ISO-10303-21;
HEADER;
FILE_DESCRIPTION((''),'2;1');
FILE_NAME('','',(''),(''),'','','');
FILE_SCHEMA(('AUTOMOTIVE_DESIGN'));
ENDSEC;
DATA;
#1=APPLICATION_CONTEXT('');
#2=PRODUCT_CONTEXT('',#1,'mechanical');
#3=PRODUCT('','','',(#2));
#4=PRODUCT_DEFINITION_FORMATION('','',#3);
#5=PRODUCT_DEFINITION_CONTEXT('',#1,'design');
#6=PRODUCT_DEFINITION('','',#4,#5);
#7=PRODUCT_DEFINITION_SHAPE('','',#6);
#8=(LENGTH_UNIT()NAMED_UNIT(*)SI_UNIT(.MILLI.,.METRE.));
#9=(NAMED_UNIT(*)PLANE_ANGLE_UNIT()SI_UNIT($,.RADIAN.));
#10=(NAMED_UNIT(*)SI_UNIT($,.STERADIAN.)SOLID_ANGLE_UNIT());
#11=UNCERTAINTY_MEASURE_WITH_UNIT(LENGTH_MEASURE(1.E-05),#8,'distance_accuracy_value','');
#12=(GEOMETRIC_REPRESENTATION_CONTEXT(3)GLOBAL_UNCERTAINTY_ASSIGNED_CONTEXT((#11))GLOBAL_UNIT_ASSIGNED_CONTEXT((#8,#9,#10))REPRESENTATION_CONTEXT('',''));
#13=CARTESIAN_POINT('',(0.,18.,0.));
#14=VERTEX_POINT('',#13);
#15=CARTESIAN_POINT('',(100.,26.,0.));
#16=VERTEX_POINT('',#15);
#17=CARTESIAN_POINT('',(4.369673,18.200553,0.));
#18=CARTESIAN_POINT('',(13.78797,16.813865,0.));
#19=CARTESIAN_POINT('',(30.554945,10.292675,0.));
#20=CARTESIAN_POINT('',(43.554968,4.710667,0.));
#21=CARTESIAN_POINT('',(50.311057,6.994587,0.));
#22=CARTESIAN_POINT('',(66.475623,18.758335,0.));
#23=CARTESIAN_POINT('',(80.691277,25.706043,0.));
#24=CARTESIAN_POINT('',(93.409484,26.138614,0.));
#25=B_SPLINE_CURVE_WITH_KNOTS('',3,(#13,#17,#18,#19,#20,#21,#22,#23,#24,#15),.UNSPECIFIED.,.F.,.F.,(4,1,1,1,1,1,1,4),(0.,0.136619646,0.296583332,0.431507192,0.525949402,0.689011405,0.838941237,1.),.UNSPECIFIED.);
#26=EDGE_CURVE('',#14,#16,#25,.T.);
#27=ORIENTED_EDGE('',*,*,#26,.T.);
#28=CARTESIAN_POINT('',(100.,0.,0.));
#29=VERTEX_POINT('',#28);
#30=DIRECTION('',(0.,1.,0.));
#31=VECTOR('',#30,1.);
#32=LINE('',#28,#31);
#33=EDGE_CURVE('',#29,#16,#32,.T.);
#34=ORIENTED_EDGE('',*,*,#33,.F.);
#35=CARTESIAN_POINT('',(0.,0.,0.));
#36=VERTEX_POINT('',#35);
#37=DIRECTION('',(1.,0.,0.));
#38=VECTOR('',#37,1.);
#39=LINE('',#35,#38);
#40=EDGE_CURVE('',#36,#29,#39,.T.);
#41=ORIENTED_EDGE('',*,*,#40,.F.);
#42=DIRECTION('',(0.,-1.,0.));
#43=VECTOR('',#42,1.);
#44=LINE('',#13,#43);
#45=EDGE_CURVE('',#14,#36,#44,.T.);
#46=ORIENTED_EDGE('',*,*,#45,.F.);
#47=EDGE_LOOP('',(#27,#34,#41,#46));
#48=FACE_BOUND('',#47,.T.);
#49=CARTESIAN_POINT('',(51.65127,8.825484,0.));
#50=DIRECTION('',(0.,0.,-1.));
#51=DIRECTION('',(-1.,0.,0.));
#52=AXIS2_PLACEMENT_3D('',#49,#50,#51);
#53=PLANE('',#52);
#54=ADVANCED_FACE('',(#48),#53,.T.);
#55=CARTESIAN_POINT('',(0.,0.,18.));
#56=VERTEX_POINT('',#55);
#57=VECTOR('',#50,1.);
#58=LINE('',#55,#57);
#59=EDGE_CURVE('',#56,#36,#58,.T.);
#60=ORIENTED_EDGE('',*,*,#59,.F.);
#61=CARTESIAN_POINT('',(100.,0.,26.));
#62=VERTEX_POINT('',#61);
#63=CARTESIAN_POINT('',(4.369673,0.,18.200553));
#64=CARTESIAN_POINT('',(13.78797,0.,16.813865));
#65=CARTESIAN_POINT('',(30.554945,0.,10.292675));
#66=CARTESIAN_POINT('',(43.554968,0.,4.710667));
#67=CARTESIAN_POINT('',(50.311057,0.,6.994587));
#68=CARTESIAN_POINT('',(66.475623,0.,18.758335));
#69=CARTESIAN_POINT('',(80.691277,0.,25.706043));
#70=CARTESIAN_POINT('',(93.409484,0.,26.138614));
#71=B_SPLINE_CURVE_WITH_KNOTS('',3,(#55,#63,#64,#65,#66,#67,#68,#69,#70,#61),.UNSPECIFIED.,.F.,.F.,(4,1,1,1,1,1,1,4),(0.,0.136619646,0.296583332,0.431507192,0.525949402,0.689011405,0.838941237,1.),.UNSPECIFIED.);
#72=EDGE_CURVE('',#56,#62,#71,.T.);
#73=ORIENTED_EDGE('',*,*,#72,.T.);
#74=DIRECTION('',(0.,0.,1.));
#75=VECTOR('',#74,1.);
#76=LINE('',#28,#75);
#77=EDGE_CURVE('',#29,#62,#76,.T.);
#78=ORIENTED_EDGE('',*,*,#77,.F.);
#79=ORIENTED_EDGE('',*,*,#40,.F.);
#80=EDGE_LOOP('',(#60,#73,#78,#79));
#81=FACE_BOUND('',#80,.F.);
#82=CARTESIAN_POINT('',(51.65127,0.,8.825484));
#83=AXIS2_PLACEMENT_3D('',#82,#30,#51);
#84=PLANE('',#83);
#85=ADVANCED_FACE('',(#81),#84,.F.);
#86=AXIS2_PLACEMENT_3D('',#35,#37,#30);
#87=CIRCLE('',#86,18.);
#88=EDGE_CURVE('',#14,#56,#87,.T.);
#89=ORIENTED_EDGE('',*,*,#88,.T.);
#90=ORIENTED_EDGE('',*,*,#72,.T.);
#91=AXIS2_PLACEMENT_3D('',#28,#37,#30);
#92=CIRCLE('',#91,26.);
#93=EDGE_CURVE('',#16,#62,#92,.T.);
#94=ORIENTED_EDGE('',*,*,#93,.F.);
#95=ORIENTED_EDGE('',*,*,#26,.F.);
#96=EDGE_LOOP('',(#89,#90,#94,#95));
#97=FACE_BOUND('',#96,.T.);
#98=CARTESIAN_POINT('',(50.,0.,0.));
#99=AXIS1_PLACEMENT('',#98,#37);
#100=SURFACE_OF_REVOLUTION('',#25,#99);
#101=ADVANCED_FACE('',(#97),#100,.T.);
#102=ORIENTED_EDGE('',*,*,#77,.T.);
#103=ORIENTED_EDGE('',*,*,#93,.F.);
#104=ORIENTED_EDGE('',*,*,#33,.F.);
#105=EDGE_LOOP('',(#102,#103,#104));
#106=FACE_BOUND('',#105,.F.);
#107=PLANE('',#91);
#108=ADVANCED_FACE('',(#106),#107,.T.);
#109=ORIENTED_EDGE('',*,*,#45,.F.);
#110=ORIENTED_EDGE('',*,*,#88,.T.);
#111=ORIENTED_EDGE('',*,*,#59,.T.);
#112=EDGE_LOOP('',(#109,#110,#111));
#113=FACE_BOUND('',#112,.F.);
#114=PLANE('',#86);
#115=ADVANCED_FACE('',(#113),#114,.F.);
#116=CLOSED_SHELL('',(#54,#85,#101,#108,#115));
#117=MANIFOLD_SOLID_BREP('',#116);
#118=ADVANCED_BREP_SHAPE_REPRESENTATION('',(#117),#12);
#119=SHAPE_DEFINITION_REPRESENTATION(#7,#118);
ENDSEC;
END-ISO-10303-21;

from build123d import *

# Parameters (mm, degrees)
F1_ANGLE = 90


with BuildPart() as f1:
    # F0 (on Top) → F1 (revolve)
    with BuildSketch(Plane.XY):
        with BuildLine():
            add(Edge.make_bspline(
                [(0, 18), (4.369673031, 18.200553342), (13.7879697958, 16.8138650428), (30.5549450805, 10.2926748944), (43.5549683653, 4.7106670496), (50.3110572543, 6.9945874011), (66.4756233338, 18.7583350429), (80.6912774182, 25.7060429411), (93.4094842344, 26.1386142265), (100, 26)],
                knots=[0, 0, 0, 0, 0.1366196461, 0.2965833322, 0.4315071917, 0.5259494023, 0.6890114049, 0.8389412371, 1, 1, 1, 1], degree=3))
            Line((0, 18), (0, 0))
            Line((0, 0), (100, 0))
            Line((100, 0), (100, 26))
        make_face()
    revolve(axis=Axis((50, 0, 0), (1, 0, 0)), revolution_arc=F1_ANGLE)


solid = f1.part
